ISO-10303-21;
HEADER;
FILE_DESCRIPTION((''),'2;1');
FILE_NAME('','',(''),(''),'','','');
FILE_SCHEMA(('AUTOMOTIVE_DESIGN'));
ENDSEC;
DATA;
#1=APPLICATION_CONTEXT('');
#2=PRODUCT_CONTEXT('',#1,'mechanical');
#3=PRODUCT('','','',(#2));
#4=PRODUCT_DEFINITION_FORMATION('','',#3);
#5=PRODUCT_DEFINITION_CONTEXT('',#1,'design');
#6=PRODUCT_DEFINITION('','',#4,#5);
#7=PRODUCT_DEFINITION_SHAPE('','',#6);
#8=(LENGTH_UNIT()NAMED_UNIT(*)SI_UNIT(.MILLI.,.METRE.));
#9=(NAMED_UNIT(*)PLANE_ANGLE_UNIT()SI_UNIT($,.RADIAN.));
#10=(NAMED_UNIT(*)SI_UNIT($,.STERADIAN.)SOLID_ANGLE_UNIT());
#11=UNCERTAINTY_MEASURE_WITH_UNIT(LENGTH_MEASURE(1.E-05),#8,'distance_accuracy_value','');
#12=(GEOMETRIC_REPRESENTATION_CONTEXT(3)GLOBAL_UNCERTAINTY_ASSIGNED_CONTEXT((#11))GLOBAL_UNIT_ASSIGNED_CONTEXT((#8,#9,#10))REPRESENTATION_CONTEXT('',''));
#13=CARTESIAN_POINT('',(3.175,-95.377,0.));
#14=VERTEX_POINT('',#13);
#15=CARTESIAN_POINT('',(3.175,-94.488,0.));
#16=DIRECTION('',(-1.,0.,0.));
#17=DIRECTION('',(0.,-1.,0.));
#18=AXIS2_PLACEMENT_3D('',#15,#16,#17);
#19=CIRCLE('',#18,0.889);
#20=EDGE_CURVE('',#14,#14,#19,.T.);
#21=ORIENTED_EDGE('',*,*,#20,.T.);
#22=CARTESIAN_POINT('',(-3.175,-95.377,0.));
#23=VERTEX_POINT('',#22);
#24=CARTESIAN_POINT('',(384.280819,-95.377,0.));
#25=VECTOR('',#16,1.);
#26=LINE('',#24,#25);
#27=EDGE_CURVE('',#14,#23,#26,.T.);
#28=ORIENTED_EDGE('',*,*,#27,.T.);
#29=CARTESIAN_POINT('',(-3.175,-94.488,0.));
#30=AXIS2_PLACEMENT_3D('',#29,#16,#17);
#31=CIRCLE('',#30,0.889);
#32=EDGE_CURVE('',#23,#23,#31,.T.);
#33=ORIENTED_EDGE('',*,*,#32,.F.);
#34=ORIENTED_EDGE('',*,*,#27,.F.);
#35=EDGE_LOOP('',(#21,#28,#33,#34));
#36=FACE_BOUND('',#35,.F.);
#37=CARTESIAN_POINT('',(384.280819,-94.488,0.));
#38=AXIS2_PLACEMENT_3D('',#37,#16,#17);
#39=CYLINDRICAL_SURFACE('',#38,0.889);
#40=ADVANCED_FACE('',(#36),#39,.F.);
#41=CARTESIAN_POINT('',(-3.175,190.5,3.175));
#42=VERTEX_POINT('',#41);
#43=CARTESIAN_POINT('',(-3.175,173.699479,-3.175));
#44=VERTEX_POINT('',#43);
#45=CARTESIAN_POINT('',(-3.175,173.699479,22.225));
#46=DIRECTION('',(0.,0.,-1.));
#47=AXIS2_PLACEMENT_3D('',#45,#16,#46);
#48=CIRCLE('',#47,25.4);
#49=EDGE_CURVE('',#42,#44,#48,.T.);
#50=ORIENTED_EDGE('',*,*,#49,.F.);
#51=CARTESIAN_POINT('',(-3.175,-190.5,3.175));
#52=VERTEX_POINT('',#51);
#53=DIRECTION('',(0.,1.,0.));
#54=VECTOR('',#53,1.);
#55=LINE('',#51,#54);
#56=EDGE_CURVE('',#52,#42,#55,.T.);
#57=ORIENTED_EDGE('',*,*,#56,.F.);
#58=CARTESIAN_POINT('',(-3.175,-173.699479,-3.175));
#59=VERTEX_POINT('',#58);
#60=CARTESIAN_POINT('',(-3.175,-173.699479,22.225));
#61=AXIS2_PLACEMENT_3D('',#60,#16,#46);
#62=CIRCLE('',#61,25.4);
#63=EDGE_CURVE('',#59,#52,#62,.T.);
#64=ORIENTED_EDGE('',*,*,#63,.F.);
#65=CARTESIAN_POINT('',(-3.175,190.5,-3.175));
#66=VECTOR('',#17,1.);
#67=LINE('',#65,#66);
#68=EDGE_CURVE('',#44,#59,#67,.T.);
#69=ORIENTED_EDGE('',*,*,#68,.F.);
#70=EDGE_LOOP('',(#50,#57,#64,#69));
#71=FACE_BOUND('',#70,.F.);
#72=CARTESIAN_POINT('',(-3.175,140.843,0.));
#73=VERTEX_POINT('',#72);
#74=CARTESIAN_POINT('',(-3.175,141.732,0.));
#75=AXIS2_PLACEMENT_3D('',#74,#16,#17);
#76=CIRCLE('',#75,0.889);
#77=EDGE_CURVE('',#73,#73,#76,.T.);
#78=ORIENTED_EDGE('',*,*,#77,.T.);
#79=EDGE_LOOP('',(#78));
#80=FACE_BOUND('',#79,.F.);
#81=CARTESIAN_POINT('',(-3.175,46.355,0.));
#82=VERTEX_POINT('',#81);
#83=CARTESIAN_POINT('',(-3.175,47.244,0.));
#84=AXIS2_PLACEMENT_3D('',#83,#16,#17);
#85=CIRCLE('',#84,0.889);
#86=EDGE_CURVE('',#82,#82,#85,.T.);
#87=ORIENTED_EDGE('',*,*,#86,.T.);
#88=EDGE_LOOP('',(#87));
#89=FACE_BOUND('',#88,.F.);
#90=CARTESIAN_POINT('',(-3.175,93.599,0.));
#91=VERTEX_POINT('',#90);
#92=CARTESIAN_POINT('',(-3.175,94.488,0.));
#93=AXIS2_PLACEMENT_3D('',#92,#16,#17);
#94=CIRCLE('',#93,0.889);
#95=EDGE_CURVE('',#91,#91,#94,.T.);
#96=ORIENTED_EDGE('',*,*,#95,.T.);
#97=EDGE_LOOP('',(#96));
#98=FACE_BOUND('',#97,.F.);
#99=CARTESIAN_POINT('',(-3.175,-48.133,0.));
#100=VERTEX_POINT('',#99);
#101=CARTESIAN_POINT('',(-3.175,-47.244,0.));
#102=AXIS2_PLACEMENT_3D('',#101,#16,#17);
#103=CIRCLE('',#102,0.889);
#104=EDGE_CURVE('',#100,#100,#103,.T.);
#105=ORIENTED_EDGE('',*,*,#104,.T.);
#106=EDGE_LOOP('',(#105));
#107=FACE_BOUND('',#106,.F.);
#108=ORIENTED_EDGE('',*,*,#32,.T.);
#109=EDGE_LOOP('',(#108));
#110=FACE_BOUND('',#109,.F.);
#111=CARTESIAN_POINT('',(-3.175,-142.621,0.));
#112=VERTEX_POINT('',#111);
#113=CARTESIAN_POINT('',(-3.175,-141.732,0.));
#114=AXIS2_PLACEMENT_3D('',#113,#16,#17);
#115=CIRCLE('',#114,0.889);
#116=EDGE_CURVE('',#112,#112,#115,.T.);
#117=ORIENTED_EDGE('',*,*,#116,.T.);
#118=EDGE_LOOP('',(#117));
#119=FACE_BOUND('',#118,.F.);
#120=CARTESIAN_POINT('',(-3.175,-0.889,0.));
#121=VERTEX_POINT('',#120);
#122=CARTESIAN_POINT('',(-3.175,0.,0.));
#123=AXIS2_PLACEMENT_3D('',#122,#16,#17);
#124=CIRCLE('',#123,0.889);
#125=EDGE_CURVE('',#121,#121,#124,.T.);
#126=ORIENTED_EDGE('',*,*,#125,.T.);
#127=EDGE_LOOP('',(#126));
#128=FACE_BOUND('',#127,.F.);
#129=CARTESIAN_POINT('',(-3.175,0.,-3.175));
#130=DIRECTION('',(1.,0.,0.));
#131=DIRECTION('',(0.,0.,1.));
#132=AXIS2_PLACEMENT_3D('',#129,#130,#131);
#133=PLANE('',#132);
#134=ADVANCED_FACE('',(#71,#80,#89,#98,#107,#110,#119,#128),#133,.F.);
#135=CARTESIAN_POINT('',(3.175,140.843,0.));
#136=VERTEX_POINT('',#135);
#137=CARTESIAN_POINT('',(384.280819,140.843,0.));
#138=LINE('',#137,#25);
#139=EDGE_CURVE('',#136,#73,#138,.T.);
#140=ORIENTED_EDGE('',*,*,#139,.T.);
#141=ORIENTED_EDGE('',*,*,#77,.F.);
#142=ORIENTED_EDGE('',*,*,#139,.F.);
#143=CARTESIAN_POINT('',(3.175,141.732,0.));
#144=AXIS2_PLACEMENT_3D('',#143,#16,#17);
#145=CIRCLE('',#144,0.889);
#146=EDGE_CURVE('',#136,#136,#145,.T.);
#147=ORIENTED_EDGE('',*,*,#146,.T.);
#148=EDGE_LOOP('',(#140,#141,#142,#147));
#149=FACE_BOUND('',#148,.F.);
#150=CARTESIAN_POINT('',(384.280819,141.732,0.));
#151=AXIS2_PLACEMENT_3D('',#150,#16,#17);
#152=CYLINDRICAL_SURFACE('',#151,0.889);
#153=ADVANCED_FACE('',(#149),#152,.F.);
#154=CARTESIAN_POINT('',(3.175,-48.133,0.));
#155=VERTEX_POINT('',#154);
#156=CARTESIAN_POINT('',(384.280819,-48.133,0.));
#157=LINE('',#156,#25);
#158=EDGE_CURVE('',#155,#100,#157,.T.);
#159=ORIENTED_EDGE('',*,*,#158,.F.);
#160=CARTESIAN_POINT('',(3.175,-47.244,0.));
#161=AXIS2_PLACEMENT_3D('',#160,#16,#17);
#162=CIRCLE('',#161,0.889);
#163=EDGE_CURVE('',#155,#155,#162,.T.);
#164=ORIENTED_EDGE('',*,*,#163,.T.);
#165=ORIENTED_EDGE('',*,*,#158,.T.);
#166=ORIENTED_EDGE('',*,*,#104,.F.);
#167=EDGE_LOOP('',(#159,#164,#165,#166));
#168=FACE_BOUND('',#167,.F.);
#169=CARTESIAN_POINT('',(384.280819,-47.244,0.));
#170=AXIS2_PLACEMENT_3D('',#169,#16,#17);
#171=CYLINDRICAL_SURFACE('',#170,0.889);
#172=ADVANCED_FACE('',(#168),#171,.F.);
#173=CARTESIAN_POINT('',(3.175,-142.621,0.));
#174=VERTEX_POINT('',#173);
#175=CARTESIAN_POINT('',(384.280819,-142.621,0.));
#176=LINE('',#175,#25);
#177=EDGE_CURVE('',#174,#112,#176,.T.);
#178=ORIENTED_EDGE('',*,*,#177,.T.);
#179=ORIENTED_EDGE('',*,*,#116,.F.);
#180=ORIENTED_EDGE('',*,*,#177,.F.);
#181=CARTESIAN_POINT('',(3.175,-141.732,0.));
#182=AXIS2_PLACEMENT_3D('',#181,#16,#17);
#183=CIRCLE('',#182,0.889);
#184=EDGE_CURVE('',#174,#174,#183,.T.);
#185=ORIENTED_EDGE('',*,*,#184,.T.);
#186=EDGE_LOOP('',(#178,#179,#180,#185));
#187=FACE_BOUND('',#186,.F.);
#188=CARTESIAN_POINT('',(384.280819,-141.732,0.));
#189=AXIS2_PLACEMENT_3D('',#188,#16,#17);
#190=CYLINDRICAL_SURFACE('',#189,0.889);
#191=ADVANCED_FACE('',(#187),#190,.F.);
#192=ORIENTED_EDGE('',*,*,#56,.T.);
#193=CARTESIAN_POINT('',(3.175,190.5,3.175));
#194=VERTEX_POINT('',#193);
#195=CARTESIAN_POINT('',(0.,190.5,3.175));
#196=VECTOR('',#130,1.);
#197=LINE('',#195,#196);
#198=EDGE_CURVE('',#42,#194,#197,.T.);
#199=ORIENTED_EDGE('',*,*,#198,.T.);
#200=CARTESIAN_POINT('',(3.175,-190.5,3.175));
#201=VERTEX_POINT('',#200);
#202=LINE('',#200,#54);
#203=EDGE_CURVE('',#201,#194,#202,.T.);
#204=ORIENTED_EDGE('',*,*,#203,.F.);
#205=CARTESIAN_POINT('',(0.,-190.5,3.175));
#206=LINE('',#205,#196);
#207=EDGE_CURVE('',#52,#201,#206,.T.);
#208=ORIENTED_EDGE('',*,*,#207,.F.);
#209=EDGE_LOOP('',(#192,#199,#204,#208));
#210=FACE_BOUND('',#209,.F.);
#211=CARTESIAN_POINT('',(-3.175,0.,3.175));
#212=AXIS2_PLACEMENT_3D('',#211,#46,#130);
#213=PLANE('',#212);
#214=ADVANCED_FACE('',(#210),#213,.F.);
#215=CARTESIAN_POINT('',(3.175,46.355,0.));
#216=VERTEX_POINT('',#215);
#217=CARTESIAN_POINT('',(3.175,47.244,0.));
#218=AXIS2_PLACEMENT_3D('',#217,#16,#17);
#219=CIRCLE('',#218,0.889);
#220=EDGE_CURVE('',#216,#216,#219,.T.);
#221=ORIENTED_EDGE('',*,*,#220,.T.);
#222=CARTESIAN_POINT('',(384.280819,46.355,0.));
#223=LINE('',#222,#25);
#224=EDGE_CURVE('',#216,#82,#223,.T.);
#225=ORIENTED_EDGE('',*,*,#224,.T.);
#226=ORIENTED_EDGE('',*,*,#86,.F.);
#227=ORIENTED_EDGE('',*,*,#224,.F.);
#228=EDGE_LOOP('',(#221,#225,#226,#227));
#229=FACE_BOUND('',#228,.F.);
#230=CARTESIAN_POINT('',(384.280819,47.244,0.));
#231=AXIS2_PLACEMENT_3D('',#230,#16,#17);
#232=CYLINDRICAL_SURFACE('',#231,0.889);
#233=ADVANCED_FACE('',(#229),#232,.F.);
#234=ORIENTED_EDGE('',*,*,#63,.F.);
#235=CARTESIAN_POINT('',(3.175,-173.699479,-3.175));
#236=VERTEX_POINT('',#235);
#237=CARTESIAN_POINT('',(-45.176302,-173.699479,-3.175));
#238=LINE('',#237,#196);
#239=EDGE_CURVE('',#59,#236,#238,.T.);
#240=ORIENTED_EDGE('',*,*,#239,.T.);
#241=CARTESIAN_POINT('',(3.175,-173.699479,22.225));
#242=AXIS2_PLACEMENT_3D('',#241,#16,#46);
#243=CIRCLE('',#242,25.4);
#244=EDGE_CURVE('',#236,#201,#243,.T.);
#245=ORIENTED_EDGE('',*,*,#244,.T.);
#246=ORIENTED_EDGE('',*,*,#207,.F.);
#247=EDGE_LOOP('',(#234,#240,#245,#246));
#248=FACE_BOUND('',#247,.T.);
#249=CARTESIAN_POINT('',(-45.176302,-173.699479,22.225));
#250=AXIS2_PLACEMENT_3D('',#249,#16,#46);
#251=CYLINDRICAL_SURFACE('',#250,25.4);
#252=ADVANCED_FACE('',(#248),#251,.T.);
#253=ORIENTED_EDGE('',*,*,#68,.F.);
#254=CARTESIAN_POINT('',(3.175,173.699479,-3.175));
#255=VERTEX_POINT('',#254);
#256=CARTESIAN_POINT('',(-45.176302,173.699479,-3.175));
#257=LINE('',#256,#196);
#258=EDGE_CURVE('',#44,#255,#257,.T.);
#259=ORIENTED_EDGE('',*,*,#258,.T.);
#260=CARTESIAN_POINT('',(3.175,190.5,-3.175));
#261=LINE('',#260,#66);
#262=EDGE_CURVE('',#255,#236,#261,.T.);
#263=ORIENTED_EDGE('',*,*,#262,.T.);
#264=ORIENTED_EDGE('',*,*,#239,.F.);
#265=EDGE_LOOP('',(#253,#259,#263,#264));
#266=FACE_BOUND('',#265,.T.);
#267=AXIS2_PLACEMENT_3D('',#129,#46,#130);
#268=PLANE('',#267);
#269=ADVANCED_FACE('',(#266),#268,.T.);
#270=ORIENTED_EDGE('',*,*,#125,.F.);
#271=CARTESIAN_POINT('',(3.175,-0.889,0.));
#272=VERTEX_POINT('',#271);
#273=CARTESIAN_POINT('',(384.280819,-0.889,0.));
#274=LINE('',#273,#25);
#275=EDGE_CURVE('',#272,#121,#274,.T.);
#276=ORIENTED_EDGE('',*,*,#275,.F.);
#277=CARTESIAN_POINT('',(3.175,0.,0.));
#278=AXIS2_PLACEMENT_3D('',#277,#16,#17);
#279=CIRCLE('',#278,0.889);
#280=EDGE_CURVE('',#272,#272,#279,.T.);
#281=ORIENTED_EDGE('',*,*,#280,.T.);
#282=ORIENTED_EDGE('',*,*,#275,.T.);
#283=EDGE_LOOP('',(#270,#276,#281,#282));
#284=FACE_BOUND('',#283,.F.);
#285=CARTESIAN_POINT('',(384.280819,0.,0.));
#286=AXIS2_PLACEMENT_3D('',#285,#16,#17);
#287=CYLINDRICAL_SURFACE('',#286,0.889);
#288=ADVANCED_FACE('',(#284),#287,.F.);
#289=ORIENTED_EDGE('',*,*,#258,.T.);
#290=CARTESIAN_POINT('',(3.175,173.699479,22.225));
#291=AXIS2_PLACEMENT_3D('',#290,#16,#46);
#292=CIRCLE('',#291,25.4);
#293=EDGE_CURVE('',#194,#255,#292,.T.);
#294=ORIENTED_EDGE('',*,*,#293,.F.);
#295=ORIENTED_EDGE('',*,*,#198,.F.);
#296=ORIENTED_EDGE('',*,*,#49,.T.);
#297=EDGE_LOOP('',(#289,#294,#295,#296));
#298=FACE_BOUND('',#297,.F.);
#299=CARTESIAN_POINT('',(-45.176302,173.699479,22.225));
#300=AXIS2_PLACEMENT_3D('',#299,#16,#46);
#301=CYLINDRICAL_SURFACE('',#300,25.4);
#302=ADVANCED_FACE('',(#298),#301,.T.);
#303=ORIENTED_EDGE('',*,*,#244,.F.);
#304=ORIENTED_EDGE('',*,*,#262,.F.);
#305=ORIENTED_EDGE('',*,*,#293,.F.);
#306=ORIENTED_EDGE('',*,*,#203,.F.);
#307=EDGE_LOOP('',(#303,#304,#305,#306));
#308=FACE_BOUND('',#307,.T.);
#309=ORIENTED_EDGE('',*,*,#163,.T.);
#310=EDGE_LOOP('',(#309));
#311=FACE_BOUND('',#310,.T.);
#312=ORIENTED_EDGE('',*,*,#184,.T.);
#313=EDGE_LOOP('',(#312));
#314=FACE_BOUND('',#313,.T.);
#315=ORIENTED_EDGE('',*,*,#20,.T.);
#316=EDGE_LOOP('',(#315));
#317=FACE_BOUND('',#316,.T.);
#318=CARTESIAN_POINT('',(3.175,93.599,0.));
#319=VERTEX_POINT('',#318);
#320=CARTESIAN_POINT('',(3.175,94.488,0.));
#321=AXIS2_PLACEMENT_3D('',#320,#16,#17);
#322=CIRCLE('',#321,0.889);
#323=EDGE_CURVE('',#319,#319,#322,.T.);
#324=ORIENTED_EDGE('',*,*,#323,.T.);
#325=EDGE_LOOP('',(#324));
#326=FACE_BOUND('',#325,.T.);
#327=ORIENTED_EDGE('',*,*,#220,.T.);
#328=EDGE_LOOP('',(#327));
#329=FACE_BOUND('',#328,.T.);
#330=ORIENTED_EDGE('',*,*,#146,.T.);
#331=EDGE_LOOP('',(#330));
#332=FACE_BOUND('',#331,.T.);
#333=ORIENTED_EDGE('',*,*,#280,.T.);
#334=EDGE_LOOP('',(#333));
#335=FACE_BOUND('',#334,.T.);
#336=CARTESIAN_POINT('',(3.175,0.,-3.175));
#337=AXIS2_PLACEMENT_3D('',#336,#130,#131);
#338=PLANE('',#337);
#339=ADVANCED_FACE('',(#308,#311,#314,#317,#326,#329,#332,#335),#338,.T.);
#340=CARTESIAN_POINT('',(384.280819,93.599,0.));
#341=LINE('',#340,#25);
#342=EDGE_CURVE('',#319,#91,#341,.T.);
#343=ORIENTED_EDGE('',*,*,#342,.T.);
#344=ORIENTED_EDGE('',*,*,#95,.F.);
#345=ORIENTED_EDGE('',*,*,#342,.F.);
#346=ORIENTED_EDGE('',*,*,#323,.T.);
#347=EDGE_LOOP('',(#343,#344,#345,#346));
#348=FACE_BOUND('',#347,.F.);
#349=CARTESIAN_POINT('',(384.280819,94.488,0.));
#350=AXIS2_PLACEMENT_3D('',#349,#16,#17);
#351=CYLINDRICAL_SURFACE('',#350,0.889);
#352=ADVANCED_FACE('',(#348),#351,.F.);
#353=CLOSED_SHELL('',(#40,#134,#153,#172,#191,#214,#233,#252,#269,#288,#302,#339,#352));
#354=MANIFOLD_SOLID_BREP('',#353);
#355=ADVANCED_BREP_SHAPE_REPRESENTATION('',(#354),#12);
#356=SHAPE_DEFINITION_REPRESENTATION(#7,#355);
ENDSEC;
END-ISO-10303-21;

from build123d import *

# Parameters (mm, degrees)
F0_W        = 6.35
F0_H        = 6.35
F1_DEPTH    = 190.5
F2_T1_DEPTH = 90.3526041263
F4_D        = 1.778


# Not quite as in the source:
# - a fillet or chamfer that OpenCascade refuses, or shapes differently, is made with other operations: its cross-section is extruded or revolved along the edge and cut away or added


with BuildPart() as f1:
    # F0 (on Front) → F1 (new body, symmetric)
    with BuildSketch(Plane.XZ):
        Rectangle(F0_W, F0_H)
    extrude(amount=F1_DEPTH, both=True)

    # F2: fillet of radius 25.4 on 2 edges, made by hand

    # F2_s2 → F2_t1 (cut)
    with BuildSketch(Plane.YZ.offset(-45.1763020632)):
        with BuildLine():
            ThreePointArc((-173.6994791747, -3.175), (-182.6797352958, -1.534524406), (-190.5, 3.175))
            Line((-190.5, 3.175), (-190.5, -3.175))
            Line((-190.5, -3.175), (-173.6994791747, -3.175))
        make_face()
        with BuildLine():
            ThreePointArc((173.6994791747, -3.175), (182.6797352958, -1.534524406), (190.5, 3.175))
            Line((190.5, 3.175), (190.5, -3.175))
            Line((190.5, -3.175), (173.6994791747, -3.175))
        make_face()
    extrude(amount=F2_T1_DEPTH, mode=Mode.SUBTRACT)

    # F4 (through all)
    with Locations(Plane.YZ.offset(3.175)):
        with Locations((47.244, 0), (94.488, 0), (141.732, 0), (0, 0), (-47.244, 0), (-94.488, 0), (-141.732, 0)):
            Hole(F4_D / 2)


solid = f1.part
